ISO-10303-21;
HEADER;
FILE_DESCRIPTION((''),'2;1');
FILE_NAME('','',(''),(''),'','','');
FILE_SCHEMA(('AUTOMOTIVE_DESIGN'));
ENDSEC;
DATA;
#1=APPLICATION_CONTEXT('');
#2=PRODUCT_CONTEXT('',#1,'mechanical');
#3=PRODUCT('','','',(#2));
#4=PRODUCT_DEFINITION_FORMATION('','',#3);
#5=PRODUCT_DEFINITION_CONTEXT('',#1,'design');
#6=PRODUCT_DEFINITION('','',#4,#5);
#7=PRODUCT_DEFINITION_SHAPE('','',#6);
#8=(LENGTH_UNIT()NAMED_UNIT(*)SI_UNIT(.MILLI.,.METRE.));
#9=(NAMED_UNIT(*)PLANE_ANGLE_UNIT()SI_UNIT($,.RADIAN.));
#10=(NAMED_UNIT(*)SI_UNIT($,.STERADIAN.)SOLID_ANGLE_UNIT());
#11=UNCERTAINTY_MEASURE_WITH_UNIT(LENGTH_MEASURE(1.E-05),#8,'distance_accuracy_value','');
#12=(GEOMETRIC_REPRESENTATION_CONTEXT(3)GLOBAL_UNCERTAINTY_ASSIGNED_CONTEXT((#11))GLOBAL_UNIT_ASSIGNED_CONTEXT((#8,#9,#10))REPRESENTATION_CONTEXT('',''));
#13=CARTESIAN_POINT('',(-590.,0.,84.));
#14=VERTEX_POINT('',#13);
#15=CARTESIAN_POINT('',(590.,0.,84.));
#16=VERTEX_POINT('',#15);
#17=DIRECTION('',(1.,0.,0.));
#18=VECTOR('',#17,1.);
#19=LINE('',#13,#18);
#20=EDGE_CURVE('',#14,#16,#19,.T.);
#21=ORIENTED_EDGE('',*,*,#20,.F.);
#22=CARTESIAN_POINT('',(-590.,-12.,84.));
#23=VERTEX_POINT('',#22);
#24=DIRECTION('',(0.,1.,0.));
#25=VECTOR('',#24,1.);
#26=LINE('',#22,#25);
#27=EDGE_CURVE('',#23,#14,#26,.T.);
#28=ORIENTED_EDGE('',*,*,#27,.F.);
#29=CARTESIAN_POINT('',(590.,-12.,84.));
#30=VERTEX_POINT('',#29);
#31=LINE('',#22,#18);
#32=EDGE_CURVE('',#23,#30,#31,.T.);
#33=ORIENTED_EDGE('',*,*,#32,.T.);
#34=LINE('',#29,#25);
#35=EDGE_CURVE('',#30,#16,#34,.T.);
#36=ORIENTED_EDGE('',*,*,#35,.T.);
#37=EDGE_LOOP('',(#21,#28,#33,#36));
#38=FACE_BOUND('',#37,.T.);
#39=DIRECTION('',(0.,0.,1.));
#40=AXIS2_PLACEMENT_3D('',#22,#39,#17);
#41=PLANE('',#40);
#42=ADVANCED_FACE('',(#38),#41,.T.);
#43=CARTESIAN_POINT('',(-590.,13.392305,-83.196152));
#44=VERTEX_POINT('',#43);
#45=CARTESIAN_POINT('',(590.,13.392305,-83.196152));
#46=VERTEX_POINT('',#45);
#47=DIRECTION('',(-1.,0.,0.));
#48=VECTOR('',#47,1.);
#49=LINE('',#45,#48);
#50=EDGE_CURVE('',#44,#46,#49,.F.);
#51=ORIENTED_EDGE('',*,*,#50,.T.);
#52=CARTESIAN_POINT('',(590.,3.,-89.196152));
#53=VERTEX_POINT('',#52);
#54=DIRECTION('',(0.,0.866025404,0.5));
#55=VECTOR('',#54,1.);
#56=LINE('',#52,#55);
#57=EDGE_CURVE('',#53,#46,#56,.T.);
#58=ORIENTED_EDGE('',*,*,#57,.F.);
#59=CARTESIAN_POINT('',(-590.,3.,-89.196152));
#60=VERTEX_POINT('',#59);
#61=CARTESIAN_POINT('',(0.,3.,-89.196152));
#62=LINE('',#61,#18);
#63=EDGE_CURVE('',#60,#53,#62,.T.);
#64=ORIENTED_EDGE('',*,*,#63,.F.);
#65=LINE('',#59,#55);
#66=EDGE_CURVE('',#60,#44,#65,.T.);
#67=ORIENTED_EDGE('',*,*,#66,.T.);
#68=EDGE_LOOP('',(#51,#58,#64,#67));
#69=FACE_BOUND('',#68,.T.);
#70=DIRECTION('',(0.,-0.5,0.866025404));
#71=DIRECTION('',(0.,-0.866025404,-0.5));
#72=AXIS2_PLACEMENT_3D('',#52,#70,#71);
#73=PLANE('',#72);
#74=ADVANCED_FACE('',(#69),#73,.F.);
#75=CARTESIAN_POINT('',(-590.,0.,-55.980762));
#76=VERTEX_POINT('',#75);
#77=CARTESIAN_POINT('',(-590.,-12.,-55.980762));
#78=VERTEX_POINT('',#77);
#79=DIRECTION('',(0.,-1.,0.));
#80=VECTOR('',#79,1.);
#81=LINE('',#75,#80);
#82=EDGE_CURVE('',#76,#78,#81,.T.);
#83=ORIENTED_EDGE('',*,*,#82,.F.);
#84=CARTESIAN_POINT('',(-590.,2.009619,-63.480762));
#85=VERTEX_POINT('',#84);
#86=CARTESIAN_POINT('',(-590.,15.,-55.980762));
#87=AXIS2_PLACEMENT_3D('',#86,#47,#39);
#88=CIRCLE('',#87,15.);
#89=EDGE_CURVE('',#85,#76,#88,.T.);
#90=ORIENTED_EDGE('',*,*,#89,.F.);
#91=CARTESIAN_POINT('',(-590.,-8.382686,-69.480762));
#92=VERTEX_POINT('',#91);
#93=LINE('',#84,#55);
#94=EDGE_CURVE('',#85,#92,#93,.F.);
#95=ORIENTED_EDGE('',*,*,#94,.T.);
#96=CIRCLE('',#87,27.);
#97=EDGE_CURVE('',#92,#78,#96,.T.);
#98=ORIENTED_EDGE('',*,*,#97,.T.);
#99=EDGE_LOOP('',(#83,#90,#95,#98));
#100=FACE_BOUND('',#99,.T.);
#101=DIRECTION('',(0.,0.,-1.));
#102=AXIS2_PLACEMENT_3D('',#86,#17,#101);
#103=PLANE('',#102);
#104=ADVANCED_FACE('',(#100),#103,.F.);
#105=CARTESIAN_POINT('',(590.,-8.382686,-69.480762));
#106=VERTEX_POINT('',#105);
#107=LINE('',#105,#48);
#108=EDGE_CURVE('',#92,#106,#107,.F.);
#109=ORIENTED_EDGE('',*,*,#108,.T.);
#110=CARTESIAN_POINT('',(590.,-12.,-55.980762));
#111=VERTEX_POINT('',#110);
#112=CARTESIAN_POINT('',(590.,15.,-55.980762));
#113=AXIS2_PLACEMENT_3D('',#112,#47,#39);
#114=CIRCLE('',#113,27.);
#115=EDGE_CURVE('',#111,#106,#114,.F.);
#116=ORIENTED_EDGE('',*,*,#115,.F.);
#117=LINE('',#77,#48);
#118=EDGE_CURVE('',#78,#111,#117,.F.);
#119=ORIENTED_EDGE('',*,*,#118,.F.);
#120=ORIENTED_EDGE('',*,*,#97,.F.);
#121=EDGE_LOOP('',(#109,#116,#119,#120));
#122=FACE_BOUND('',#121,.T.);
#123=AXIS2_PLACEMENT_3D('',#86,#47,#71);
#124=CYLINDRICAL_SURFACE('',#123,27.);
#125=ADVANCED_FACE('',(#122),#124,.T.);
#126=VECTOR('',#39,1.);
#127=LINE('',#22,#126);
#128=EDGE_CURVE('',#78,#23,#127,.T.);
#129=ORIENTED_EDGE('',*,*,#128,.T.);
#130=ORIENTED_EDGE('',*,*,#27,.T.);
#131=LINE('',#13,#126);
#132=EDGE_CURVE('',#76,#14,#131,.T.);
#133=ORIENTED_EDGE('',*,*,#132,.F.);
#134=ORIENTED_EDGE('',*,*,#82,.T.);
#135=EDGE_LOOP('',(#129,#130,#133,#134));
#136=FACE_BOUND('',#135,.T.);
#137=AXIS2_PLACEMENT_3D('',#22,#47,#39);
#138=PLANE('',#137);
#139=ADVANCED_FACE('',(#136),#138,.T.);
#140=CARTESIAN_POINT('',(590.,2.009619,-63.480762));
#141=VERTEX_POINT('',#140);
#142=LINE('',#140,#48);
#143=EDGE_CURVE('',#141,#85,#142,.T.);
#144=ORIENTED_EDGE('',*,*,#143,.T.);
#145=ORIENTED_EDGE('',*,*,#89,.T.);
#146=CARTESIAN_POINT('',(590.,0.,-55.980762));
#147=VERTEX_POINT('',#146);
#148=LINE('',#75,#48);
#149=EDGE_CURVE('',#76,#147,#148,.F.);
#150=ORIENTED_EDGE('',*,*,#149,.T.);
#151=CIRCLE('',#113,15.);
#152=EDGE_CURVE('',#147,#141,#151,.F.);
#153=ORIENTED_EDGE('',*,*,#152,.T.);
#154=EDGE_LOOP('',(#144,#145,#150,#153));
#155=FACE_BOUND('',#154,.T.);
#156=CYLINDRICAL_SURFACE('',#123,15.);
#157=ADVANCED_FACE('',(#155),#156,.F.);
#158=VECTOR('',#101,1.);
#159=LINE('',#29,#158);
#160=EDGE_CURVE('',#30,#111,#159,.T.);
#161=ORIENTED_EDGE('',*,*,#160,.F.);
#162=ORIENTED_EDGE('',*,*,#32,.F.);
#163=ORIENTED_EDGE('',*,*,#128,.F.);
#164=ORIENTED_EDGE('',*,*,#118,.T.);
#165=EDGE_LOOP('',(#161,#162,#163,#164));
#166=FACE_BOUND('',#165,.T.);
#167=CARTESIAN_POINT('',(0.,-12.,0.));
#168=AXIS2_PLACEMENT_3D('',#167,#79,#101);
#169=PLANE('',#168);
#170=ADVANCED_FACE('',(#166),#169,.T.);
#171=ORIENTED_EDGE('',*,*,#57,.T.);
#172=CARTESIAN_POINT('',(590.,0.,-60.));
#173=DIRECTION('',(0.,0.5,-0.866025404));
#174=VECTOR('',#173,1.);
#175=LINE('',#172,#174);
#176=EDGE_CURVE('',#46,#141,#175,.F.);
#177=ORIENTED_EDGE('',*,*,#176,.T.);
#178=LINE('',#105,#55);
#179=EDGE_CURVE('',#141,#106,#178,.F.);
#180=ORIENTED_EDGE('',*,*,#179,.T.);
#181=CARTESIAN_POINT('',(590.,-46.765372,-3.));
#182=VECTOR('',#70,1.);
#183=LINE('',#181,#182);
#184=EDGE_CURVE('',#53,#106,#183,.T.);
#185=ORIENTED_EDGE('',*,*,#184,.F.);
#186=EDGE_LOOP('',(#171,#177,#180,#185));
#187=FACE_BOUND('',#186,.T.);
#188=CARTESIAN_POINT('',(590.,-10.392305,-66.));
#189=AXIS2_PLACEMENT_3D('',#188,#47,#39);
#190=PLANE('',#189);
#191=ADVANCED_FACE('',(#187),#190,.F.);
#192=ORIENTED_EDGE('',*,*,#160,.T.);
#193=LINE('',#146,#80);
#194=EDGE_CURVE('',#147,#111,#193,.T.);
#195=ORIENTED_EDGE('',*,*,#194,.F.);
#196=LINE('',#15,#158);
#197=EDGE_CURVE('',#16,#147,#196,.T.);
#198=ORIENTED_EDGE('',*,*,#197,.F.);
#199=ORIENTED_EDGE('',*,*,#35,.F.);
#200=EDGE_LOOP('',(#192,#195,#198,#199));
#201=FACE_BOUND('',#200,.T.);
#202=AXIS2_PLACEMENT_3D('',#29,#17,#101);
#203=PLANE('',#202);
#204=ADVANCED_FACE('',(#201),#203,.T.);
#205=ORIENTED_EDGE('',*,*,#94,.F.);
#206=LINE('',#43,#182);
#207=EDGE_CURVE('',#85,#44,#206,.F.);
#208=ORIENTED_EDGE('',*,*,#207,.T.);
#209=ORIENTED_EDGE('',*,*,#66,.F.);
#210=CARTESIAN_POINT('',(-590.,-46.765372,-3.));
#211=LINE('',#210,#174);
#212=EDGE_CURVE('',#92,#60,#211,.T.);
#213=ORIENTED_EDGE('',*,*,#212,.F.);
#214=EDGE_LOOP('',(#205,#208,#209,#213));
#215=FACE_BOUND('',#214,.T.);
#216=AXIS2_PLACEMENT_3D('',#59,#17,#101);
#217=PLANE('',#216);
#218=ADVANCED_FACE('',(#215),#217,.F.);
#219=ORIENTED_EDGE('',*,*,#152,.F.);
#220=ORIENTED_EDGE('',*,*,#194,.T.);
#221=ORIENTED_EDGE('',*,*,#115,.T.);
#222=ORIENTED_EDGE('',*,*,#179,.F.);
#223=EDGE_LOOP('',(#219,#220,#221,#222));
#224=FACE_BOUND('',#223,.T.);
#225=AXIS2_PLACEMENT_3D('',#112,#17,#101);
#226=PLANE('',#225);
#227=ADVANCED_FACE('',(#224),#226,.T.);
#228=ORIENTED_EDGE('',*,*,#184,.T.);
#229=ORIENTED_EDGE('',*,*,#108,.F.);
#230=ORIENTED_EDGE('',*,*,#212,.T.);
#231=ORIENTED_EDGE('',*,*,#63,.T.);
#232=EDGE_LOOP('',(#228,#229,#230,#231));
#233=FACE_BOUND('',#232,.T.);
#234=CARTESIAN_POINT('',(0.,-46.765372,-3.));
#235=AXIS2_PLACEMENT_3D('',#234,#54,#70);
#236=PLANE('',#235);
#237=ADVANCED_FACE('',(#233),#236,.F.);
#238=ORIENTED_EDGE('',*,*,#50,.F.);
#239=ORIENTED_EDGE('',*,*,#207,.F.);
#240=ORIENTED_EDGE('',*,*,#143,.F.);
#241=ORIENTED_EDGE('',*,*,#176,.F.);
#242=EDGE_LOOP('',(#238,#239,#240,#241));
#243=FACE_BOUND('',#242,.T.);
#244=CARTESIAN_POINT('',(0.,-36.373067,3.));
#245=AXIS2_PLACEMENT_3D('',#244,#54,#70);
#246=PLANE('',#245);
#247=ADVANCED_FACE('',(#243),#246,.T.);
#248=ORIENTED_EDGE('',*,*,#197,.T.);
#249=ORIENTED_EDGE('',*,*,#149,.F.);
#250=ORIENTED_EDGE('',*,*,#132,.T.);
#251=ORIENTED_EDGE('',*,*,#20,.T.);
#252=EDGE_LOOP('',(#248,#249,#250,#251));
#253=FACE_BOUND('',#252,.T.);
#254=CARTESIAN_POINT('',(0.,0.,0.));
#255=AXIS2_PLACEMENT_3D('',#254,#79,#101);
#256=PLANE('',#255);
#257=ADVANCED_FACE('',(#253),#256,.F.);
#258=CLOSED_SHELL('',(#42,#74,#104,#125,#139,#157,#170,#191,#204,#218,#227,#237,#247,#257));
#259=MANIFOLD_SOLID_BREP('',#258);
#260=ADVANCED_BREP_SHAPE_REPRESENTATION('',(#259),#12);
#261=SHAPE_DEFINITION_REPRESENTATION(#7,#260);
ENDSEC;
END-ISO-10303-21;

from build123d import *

# Parameters (mm, degrees)
SKETCH1_W            = 1180
SKETCH1_H            = 168
BASE_FLANGE1_DEPTH   = 12
EDGE_FLANGE1_START   = -590
EDGE_FLANGE1_DEPTH   = 1180
EDGE_FLANGE1_2_DEPTH = 1180


# Read off the part's stored shape, not the designer's step: Edge-Flange1
# Sheet-metal steps are written as plain solids
with BuildPart() as part:
    # Sketch1 → Base-Flange1 (new body)
    with BuildSketch(Plane(origin=(0, 0, 0), x_dir=(1, 0, 0), z_dir=(0, 1, 0))):
        Rectangle(SKETCH1_W, SKETCH1_H)
    extrude(amount=-BASE_FLANGE1_DEPTH)

    # Edge-Flange1 outline → Edge-Flange1 (cut)
    with BuildSketch(Plane.YZ.offset(EDGE_FLANGE1_START)):
        with BuildLine():
            Line((0, -84), (-8.382685902, -69.480762114))
            ThreePointArc((-8.382685902, -69.480762114), (-11.07999731, -62.968876332), (-12, -55.980762114))
            Line((-12, -55.980762114), (-12, -84))
            Line((-12, -84), (0, -84))
        make_face()
    extrude(amount=EDGE_FLANGE1_DEPTH, mode=Mode.SUBTRACT)

    # Edge-Flange1 2 outline → Edge-Flange1 2 (add)
    with BuildSketch(Plane.YZ.offset(EDGE_FLANGE1_START)):
        with BuildLine():
            Line((0, -55.980762114), (0, -84))
            Line((0, -84), (3, -89.196152423))
            Line((3, -89.196152423), (13.392304845, -83.196152423))
            Line((13.392304845, -83.196152423), (2.009618943, -63.480762114))
            ThreePointArc((2.009618943, -63.480762114), (0.511112606, -59.86304779), (0, -55.980762114))
        make_face()
    extrude(amount=EDGE_FLANGE1_2_DEPTH)


solid = part.part
